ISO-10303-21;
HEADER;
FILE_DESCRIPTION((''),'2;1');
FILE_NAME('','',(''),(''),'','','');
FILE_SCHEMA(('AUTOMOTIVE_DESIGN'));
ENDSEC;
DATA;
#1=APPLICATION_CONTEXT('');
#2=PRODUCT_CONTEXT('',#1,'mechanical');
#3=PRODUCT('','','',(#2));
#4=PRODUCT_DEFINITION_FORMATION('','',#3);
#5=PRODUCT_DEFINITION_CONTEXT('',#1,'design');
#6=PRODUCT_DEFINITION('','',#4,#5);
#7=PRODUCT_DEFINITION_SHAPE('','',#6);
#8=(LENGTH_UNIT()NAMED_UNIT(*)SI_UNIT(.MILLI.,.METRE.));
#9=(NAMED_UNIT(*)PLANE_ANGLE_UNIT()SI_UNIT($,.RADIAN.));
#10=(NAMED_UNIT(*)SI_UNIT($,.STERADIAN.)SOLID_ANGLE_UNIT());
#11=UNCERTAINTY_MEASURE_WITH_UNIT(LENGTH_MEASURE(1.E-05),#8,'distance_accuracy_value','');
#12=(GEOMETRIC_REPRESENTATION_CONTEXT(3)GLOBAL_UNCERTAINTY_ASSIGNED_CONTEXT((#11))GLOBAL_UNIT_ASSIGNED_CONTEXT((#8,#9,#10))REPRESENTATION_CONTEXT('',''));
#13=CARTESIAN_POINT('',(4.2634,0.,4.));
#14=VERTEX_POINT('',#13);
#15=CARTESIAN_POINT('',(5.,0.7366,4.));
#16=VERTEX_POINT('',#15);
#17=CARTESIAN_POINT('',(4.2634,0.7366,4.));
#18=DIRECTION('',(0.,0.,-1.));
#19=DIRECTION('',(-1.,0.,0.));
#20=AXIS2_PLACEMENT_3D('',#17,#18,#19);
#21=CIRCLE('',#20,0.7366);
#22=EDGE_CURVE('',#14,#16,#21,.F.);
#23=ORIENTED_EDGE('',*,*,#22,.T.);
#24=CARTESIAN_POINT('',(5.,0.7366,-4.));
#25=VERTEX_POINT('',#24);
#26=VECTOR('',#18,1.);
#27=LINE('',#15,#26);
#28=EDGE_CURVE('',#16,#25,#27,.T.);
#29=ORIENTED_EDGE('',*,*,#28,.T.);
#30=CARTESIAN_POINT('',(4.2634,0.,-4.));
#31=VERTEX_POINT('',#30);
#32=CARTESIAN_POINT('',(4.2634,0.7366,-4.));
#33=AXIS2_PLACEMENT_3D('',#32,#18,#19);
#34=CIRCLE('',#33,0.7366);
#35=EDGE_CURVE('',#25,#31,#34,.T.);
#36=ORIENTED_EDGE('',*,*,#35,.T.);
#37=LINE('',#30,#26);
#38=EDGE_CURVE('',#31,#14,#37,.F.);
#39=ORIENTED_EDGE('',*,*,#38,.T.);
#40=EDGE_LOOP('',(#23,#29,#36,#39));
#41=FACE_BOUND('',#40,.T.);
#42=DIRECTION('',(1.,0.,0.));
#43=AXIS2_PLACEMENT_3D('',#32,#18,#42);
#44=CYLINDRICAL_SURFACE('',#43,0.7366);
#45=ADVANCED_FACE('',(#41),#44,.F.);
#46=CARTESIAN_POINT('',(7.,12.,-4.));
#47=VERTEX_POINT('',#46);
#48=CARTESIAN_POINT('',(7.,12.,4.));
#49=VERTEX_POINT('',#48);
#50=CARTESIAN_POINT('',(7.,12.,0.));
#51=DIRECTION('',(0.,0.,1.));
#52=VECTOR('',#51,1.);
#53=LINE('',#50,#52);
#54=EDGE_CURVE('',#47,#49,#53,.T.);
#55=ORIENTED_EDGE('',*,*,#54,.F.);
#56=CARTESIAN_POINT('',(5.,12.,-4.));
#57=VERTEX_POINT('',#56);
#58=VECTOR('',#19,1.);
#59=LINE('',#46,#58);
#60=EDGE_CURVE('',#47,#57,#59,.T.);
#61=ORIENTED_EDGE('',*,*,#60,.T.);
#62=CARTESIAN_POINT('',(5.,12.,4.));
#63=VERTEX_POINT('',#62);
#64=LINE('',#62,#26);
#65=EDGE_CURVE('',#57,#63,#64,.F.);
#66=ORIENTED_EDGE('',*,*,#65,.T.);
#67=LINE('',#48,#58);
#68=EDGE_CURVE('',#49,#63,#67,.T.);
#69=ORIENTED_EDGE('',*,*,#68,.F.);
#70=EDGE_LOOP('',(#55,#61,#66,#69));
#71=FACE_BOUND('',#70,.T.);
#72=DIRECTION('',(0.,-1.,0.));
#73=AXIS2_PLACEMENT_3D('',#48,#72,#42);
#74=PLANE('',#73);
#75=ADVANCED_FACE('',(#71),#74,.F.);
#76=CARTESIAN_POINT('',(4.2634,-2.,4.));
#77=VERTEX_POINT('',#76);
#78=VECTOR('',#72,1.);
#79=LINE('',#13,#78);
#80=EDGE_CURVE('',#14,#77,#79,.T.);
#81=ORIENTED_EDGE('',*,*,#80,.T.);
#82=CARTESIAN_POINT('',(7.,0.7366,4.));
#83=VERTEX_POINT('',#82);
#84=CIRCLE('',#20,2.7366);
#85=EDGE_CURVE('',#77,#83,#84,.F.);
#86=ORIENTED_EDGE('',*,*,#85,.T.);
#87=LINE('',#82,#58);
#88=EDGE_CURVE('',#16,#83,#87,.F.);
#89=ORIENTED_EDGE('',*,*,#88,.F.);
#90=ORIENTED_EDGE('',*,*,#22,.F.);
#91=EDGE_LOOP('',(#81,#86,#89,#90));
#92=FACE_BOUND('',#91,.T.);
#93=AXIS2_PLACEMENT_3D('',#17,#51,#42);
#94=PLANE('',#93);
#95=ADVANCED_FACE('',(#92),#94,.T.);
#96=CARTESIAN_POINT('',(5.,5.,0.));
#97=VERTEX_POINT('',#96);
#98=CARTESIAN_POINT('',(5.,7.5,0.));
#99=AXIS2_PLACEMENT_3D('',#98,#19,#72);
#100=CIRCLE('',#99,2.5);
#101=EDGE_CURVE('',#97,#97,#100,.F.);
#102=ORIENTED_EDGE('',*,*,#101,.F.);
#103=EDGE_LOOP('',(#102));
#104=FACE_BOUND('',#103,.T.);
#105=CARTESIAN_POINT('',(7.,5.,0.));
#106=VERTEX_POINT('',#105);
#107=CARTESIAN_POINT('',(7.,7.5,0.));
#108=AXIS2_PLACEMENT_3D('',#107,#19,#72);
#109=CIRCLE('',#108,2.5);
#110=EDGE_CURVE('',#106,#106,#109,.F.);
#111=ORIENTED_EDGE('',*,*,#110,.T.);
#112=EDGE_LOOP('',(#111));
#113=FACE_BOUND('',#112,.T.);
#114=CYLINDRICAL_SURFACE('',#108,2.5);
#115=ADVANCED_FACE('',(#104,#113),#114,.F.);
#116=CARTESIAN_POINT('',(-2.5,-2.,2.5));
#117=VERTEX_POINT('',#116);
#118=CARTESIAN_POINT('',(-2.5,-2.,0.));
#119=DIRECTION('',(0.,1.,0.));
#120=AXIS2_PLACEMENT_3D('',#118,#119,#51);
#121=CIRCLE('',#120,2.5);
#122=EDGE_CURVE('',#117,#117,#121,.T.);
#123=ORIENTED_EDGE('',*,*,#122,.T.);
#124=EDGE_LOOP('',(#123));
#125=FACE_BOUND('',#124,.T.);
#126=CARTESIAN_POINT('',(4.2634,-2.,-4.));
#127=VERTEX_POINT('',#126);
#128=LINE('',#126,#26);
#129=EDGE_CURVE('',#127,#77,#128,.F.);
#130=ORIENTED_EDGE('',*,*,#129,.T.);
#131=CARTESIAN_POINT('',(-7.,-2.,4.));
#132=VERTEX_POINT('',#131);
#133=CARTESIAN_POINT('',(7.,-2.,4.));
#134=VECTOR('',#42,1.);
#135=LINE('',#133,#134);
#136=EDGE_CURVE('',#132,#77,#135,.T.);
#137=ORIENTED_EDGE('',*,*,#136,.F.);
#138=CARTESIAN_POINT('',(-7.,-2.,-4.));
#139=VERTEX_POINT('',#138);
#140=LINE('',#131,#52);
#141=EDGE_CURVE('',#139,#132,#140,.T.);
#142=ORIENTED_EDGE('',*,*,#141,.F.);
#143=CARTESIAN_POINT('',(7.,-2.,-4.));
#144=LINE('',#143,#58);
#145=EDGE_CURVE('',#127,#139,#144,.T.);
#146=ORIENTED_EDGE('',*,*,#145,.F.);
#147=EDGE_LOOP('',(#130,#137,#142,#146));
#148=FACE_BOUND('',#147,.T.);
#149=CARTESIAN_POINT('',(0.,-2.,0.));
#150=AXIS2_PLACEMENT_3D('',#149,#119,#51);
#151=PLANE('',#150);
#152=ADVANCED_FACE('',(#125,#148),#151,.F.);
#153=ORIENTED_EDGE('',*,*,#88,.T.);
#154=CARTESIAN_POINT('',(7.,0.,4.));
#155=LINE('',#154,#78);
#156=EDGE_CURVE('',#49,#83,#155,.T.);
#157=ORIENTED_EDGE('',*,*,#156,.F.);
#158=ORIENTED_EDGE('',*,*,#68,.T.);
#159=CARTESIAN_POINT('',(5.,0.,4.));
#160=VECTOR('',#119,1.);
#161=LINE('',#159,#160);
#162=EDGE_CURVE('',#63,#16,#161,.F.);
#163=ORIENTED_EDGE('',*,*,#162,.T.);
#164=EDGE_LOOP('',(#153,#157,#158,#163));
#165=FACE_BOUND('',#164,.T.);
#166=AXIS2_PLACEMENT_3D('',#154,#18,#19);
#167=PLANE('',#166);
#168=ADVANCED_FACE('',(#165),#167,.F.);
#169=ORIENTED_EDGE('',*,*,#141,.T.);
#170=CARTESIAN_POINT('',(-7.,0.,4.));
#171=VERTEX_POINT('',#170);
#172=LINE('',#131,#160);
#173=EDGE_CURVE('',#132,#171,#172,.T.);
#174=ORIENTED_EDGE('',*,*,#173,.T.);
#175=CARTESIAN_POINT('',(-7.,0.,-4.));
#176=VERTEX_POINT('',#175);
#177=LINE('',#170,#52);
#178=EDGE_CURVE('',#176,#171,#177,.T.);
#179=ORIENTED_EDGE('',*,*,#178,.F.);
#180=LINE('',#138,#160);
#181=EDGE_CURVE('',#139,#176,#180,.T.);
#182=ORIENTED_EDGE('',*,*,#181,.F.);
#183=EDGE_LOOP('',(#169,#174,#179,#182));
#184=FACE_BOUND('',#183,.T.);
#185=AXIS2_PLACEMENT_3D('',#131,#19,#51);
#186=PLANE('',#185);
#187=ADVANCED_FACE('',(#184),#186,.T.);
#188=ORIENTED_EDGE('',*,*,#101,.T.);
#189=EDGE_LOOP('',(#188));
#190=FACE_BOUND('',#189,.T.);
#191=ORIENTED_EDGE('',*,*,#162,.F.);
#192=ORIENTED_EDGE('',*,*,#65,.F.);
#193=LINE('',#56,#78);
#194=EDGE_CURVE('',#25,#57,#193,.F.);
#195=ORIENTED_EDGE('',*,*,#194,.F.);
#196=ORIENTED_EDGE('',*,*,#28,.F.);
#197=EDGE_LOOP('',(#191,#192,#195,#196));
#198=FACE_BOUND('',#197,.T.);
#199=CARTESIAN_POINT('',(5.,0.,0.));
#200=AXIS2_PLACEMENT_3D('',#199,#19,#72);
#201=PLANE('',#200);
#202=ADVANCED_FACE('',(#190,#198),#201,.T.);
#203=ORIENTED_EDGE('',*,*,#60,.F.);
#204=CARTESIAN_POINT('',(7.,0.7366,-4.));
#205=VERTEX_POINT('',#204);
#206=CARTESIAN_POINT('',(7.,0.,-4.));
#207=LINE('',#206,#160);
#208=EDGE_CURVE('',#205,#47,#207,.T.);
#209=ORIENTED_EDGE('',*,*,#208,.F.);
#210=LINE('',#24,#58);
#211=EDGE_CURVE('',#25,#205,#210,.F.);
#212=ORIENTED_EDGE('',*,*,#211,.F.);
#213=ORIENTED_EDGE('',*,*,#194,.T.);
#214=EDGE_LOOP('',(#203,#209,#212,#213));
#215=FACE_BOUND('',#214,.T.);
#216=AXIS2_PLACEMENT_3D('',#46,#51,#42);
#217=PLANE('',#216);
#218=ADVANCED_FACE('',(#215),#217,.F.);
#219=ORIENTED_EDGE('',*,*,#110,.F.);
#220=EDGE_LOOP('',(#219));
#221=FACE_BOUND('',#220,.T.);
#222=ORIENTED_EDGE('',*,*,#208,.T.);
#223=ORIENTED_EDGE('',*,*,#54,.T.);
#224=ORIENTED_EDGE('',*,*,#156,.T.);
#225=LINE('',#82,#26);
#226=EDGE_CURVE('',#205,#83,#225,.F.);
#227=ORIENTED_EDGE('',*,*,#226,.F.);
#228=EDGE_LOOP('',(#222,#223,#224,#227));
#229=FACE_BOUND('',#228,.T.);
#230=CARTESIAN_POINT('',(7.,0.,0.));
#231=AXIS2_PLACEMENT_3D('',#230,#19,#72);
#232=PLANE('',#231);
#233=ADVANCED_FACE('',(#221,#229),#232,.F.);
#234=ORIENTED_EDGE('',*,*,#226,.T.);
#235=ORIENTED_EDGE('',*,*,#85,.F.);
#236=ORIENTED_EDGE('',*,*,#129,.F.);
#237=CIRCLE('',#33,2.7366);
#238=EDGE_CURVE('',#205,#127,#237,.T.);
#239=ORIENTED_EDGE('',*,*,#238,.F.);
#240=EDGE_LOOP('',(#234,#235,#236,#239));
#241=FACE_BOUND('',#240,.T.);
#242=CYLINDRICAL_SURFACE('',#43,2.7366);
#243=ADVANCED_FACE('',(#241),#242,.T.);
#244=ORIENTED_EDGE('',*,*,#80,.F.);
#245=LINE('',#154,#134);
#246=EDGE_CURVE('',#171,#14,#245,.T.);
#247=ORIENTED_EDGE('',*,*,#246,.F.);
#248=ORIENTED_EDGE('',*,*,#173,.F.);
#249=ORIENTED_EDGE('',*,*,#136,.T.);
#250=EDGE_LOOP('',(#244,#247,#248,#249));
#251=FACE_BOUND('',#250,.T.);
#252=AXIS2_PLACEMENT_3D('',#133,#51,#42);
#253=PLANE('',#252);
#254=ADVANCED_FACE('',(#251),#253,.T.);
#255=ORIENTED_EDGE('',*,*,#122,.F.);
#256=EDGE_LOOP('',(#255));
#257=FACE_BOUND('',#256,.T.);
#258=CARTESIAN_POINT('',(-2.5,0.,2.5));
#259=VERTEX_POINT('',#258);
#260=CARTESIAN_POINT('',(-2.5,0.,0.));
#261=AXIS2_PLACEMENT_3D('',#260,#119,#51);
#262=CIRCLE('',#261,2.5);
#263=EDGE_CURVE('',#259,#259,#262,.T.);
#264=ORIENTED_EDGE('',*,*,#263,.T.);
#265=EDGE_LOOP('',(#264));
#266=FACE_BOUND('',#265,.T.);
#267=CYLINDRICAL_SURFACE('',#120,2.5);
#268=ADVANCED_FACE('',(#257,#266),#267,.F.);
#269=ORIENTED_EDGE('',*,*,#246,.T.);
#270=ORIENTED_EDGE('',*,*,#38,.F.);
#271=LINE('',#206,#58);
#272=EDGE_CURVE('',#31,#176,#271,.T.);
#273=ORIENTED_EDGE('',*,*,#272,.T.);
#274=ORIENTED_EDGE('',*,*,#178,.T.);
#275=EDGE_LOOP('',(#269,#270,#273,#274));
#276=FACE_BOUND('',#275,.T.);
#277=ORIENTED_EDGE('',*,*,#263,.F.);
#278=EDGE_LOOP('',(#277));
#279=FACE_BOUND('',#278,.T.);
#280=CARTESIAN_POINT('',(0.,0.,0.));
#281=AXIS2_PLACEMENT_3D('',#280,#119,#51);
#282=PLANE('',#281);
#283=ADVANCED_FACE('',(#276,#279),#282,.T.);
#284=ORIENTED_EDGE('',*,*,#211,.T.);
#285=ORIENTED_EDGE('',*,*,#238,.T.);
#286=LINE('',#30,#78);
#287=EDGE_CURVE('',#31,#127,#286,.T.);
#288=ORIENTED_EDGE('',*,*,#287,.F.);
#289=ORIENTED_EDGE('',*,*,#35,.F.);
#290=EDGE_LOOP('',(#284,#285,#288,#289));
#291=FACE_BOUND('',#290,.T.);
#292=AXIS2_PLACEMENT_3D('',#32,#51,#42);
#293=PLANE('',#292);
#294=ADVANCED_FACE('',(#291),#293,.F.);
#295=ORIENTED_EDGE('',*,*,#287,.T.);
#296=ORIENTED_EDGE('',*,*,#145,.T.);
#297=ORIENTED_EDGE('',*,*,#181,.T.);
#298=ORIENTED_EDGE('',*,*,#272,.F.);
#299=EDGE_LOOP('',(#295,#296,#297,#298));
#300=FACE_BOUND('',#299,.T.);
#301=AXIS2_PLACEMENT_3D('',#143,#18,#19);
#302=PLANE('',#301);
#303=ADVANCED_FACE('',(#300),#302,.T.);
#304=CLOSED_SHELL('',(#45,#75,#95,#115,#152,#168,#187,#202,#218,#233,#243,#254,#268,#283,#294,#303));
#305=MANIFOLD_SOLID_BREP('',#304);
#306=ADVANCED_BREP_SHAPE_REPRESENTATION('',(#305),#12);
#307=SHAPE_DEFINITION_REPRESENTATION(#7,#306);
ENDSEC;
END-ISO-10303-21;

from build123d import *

# Parameters (mm, degrees)
SKETCH1_W                    = 14
SKETCH1_H                    = 8
SKETCH1_R                    = 2.5
BASE_FLANGE1_DEPTH           = 2
EDGE_FLANGE1_STRIP_W         = 9.4732
EDGE_FLANGE1_STRIP_H         = 2
EDGE_FLANGE1_STRIP_CUT_DEPTH = 8
EDGE_FLANGE1_DEPTH           = 8
EDGE_FLANGE1_PROFILE_W       = 8
EDGE_FLANGE1_PROFILE_H       = 11.2634
EDGE_FLANGE1_PROFILE_R       = 2.5
EDGE_FLANGE1_FLAT_DEPTH      = 2


# Sheet-metal steps are written as plain solids
with BuildPart() as part:
    # Sketch1 → Base-Flange1 (new body)
    with BuildSketch(Plane(origin=(0, 0, 0), x_dir=(1, 0, 0), z_dir=(0, 1, 0))):
        Rectangle(SKETCH1_W, SKETCH1_H)
        with Locations(Location((-2.5, 0, 0), (0, 0, 270))):
            Circle(SKETCH1_R, mode=Mode.SUBTRACT)
    extrude(amount=-BASE_FLANGE1_DEPTH)

    # Edge-Flange1 strip (across the edge) → Edge-Flange1 strip cut (cut)
    with BuildSketch(Plane(origin=(7, 0, 4), x_dir=(-1, 0, 0), z_dir=(0, 0, -1))):
        with Locations((-2, -1)):
            Rectangle(EDGE_FLANGE1_STRIP_W, EDGE_FLANGE1_STRIP_H)
    extrude(amount=EDGE_FLANGE1_STRIP_CUT_DEPTH, mode=Mode.SUBTRACT)

    # Edge-Flange1 bend section (across the edge) → Edge-Flange1 (add)
    with BuildSketch(Plane(origin=(7, 0, 4), x_dir=(-1, 0, 0), z_dir=(0, 0, -1))):
        with BuildLine():
            Line((0, 0.7366), (2, 0.7366))
            ThreePointArc((2, 0.7366), (2.215745145, 0.215745145), (2.7366, 0))
            Line((2.7366, 0), (2.7366, -2))
            ThreePointArc((2.7366, -2), (0.801531583, -1.198468417), (0, 0.7366))
        make_face()
    extrude(amount=EDGE_FLANGE1_DEPTH)

    # Edge-Flange1 profile (on flange) → Edge-Flange1 flat (add)
    with BuildSketch(Plane(origin=(7, 0, 0), x_dir=(0, 0, -1), z_dir=(1, 0, 0))):
        with Locations((0, 6.3683)):
            Rectangle(EDGE_FLANGE1_PROFILE_W, EDGE_FLANGE1_PROFILE_H)
        with Locations((0, 7.5)):
            Circle(EDGE_FLANGE1_PROFILE_R, mode=Mode.SUBTRACT)
    extrude(amount=-EDGE_FLANGE1_FLAT_DEPTH)


solid = part.part
